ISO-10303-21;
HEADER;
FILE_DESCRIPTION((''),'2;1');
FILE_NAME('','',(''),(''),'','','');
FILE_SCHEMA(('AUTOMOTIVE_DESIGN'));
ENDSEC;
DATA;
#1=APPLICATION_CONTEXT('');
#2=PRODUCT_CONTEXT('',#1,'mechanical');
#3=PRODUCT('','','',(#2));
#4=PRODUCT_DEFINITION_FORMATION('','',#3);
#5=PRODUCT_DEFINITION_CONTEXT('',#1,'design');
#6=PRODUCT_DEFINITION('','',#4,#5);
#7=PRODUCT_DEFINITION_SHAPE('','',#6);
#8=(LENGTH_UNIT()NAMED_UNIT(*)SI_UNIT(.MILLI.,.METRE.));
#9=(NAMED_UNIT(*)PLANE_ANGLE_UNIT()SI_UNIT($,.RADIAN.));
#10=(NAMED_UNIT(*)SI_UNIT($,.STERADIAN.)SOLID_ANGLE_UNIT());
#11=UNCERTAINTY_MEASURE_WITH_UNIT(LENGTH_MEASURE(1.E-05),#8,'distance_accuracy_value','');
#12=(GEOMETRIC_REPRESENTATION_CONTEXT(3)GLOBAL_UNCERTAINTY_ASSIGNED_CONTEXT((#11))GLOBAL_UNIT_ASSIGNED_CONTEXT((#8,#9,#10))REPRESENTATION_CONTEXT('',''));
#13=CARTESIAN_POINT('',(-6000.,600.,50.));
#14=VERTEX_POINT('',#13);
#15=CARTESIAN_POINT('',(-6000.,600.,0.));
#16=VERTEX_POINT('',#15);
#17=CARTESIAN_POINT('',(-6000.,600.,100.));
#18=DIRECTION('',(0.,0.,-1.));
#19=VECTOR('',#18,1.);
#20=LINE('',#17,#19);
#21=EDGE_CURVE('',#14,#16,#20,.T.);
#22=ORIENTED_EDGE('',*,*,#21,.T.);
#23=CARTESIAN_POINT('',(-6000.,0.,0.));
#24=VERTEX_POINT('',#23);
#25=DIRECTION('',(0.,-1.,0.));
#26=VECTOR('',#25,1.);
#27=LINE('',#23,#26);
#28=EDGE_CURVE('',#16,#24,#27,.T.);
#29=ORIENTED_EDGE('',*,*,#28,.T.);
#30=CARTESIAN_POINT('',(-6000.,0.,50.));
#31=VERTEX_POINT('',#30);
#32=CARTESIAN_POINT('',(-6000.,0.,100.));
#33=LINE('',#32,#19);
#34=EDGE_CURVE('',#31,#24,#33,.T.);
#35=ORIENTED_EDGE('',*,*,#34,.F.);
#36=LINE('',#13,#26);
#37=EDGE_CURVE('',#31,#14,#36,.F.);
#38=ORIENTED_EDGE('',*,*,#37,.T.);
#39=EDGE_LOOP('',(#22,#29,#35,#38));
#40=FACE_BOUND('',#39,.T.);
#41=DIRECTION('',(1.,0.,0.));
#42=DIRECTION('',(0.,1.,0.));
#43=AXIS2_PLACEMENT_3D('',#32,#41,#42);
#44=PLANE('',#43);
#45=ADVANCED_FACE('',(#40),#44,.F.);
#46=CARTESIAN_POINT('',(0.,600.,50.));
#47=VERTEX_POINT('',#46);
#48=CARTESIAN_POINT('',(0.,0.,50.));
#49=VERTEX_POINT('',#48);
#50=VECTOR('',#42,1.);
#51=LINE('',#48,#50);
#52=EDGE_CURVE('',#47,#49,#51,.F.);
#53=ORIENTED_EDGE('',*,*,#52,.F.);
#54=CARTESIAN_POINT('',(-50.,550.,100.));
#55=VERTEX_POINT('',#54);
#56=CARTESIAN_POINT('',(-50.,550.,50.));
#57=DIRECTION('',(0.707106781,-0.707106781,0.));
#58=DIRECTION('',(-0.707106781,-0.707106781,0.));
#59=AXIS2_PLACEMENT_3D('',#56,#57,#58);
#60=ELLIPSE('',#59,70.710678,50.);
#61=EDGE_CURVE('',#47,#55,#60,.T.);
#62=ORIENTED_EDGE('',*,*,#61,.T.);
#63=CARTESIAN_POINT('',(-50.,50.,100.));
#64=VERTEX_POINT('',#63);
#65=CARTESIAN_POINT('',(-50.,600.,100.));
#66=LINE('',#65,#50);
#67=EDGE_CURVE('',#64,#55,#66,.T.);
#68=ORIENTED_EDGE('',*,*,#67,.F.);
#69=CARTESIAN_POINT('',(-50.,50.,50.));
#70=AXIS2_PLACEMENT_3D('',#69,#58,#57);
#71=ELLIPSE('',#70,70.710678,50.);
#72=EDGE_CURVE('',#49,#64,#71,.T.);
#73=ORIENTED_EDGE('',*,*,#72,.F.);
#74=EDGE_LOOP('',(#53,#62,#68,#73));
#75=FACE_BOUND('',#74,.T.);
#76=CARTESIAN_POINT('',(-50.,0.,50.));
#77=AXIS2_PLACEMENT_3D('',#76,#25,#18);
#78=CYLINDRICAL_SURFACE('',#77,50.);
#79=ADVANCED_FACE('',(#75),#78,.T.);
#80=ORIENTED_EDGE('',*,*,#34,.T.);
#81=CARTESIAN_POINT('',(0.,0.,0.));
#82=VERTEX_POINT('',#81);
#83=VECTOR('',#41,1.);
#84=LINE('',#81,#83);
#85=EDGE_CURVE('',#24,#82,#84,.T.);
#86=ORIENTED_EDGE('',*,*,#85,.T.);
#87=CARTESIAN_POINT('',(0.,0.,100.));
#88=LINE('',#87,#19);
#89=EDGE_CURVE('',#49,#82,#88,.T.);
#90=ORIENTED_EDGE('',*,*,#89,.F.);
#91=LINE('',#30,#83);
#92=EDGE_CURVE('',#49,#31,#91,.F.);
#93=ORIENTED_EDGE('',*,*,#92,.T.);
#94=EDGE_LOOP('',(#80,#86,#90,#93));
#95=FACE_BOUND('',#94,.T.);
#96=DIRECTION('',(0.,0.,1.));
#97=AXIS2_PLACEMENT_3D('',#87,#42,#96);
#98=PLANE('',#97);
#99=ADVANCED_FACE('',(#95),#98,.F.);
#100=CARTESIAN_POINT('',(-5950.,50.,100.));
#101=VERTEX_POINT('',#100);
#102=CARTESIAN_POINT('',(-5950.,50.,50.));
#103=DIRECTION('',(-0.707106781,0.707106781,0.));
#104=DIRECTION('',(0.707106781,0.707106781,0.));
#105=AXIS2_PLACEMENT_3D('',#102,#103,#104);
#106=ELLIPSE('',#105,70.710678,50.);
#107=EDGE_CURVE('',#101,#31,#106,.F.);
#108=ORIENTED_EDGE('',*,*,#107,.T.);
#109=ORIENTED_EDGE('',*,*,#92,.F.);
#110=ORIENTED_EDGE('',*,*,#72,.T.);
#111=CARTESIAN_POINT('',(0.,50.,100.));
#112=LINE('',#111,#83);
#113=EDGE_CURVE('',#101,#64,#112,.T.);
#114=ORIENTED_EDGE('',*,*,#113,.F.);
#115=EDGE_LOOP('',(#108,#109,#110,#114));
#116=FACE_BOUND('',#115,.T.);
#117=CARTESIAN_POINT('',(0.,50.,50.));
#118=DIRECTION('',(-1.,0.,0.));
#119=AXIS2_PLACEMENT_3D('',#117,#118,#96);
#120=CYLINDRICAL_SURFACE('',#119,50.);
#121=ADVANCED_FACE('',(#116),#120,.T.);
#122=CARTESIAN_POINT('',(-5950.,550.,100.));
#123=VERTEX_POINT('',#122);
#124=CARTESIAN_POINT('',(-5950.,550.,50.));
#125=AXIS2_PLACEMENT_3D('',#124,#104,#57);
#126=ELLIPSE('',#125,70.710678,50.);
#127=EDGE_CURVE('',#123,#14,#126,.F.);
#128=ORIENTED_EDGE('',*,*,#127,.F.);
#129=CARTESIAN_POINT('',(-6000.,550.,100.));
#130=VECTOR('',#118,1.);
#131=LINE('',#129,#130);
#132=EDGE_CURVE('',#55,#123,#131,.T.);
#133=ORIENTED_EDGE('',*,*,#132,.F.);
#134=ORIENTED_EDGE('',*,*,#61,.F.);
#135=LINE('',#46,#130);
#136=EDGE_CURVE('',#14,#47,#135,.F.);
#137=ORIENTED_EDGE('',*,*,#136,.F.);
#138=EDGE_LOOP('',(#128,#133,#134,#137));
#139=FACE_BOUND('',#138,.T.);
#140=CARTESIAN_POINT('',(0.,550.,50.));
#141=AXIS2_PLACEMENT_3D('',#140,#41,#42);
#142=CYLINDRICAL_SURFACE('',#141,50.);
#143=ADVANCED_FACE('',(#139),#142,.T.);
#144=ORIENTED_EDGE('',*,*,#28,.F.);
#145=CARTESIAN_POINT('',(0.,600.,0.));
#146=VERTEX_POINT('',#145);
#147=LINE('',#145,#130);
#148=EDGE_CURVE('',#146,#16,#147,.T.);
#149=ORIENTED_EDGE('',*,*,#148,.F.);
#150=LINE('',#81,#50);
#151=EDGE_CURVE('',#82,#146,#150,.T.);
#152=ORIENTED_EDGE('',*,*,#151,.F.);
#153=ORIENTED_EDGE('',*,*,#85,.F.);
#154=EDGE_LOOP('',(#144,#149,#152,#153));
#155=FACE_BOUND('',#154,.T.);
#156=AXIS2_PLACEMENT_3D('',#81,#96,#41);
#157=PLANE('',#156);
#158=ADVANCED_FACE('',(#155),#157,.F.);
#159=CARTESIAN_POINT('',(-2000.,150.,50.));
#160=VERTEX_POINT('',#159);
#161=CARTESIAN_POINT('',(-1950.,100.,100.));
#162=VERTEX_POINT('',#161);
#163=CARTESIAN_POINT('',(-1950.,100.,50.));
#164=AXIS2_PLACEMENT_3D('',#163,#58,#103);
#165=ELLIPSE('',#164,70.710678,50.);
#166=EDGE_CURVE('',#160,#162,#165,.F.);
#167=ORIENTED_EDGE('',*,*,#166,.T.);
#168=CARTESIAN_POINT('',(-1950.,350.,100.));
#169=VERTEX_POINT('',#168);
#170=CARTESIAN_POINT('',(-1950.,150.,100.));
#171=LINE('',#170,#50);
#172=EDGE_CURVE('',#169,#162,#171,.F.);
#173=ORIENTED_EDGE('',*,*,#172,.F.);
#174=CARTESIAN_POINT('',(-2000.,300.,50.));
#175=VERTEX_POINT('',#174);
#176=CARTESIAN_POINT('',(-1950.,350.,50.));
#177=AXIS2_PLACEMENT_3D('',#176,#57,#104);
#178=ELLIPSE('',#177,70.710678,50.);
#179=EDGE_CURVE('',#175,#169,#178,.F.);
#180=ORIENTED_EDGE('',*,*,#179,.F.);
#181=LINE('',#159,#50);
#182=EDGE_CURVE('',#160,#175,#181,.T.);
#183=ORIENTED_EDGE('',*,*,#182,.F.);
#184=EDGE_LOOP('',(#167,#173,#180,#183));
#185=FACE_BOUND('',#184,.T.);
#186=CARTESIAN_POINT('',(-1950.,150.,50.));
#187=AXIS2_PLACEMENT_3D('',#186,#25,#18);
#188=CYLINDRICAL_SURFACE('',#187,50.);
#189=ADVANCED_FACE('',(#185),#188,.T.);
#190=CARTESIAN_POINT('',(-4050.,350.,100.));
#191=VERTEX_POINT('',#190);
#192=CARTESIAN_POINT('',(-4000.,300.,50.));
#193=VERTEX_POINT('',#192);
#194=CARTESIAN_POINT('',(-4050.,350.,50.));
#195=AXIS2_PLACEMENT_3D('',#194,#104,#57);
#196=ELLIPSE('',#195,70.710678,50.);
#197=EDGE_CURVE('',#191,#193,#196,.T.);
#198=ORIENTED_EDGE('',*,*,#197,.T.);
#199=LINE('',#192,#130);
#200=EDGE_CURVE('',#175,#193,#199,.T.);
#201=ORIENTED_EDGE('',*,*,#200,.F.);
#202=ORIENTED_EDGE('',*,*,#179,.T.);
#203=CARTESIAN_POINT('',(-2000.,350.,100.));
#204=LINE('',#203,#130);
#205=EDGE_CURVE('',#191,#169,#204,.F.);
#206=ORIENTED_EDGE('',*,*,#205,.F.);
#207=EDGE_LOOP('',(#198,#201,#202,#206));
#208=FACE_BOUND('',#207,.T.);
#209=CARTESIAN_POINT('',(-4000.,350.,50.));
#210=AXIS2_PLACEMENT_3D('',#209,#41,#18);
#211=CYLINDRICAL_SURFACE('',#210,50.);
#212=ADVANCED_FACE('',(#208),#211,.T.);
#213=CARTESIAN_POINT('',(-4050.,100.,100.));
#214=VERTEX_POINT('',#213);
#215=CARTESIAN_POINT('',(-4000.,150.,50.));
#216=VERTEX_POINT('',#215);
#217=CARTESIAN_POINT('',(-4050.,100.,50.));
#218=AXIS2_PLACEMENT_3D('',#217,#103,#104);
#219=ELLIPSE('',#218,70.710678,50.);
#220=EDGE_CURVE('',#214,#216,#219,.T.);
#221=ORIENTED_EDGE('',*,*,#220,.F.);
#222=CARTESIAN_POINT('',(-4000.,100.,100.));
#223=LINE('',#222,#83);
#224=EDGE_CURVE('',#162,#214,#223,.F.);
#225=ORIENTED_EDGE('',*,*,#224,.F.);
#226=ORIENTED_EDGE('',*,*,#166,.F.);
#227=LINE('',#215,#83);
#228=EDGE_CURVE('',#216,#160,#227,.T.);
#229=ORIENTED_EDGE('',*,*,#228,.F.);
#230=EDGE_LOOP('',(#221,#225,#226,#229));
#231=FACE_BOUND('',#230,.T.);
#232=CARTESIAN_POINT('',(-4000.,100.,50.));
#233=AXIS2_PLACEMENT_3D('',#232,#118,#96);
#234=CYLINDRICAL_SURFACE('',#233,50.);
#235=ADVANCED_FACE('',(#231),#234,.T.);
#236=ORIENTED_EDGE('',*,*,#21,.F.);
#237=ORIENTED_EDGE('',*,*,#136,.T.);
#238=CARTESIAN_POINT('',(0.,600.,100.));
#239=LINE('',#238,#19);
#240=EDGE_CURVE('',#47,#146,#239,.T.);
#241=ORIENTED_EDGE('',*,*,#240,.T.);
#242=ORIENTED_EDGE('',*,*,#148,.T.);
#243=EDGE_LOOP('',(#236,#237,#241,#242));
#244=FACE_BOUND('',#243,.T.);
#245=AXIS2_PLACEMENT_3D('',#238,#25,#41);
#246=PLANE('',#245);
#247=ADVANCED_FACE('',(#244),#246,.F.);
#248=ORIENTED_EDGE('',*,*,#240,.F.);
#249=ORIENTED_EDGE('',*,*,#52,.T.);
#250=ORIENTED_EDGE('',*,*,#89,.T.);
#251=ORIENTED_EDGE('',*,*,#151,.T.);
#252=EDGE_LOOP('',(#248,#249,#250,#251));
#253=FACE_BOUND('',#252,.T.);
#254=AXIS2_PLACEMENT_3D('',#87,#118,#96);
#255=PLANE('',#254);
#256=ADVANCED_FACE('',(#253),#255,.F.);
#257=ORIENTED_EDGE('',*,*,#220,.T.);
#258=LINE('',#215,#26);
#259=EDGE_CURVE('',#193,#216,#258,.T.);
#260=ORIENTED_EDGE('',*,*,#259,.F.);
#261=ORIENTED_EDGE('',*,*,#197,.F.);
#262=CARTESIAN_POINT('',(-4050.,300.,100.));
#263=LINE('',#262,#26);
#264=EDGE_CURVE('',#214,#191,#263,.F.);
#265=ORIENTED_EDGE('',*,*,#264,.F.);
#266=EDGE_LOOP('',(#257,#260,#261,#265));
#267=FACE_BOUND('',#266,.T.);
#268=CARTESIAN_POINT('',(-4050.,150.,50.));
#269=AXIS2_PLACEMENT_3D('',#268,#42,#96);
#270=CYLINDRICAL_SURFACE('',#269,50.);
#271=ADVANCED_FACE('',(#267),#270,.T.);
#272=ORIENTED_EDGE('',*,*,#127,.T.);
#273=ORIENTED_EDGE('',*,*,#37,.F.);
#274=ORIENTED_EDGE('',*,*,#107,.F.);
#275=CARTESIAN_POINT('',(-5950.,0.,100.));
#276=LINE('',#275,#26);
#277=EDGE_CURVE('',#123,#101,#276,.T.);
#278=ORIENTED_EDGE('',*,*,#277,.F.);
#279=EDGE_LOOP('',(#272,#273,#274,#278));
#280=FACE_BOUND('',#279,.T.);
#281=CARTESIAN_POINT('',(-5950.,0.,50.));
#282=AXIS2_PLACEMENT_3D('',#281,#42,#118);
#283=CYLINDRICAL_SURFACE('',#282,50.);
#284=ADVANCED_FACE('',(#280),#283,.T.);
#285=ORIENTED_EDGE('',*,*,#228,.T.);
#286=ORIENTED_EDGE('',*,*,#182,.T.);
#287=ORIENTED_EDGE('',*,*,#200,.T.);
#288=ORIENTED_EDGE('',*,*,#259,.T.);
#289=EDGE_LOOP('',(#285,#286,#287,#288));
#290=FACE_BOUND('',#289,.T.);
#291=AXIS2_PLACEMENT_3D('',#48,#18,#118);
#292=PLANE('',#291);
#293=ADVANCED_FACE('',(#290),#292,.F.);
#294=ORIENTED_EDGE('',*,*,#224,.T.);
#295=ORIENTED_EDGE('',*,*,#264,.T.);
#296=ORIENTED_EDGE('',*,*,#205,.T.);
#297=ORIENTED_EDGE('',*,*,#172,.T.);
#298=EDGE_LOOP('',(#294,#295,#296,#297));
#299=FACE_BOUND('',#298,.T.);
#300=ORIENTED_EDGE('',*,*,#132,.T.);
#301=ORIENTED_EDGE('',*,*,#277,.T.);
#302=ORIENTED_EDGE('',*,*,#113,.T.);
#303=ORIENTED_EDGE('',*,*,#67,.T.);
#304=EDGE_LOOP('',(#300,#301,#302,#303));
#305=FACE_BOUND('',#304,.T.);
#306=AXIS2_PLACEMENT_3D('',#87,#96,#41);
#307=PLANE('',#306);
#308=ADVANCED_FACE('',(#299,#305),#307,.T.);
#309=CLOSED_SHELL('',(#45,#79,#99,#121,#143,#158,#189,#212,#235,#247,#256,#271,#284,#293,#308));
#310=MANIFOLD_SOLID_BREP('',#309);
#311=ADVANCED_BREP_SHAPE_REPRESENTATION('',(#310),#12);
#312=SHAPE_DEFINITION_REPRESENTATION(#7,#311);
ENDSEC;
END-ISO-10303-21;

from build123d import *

# Parameters (mm, degrees)
SKETCH1_W           = 6000
SKETCH1_H           = 600
BOSS_EXTRUDE1_DEPTH = 100
SKETCH2_W           = 2000
SKETCH2_H           = 150
CUT_EXTRUDE1_DEPTH  = 50
FILLET2_R           = 50


with BuildPart() as part:
    # Sketch1 → Boss-Extrude1 (new body)
    with BuildSketch(Plane.XY):
        with Locations((-3000, 300)):
            Rectangle(SKETCH1_W, SKETCH1_H)
    extrude(amount=BOSS_EXTRUDE1_DEPTH)

    # Sketch2 → Cut-Extrude1 (cut)
    with BuildSketch(Plane.XY.offset(100)):
        with Locations((-3000, 225)):
            Rectangle(SKETCH2_W, SKETCH2_H)
    extrude(amount=-CUT_EXTRUDE1_DEPTH, mode=Mode.SUBTRACT)

    # Fillet2
    fillet2_edges = [part.edges().sort_by_distance(p)[0] for p in [
        (-3000, 0, 100),
        (-6000, 300, 100),
        (-3000, 600, 100),
        (0, 300, 100),
        (-3000, 300, 100),
        (-4000, 225, 100),
        (-3000, 150, 100),
        (-2000, 225, 100),
    ]]
    fillet(fillet2_edges, radius=FILLET2_R - 0.0001)  # a hair under: the kernel refuses the full size


solid = part.part
